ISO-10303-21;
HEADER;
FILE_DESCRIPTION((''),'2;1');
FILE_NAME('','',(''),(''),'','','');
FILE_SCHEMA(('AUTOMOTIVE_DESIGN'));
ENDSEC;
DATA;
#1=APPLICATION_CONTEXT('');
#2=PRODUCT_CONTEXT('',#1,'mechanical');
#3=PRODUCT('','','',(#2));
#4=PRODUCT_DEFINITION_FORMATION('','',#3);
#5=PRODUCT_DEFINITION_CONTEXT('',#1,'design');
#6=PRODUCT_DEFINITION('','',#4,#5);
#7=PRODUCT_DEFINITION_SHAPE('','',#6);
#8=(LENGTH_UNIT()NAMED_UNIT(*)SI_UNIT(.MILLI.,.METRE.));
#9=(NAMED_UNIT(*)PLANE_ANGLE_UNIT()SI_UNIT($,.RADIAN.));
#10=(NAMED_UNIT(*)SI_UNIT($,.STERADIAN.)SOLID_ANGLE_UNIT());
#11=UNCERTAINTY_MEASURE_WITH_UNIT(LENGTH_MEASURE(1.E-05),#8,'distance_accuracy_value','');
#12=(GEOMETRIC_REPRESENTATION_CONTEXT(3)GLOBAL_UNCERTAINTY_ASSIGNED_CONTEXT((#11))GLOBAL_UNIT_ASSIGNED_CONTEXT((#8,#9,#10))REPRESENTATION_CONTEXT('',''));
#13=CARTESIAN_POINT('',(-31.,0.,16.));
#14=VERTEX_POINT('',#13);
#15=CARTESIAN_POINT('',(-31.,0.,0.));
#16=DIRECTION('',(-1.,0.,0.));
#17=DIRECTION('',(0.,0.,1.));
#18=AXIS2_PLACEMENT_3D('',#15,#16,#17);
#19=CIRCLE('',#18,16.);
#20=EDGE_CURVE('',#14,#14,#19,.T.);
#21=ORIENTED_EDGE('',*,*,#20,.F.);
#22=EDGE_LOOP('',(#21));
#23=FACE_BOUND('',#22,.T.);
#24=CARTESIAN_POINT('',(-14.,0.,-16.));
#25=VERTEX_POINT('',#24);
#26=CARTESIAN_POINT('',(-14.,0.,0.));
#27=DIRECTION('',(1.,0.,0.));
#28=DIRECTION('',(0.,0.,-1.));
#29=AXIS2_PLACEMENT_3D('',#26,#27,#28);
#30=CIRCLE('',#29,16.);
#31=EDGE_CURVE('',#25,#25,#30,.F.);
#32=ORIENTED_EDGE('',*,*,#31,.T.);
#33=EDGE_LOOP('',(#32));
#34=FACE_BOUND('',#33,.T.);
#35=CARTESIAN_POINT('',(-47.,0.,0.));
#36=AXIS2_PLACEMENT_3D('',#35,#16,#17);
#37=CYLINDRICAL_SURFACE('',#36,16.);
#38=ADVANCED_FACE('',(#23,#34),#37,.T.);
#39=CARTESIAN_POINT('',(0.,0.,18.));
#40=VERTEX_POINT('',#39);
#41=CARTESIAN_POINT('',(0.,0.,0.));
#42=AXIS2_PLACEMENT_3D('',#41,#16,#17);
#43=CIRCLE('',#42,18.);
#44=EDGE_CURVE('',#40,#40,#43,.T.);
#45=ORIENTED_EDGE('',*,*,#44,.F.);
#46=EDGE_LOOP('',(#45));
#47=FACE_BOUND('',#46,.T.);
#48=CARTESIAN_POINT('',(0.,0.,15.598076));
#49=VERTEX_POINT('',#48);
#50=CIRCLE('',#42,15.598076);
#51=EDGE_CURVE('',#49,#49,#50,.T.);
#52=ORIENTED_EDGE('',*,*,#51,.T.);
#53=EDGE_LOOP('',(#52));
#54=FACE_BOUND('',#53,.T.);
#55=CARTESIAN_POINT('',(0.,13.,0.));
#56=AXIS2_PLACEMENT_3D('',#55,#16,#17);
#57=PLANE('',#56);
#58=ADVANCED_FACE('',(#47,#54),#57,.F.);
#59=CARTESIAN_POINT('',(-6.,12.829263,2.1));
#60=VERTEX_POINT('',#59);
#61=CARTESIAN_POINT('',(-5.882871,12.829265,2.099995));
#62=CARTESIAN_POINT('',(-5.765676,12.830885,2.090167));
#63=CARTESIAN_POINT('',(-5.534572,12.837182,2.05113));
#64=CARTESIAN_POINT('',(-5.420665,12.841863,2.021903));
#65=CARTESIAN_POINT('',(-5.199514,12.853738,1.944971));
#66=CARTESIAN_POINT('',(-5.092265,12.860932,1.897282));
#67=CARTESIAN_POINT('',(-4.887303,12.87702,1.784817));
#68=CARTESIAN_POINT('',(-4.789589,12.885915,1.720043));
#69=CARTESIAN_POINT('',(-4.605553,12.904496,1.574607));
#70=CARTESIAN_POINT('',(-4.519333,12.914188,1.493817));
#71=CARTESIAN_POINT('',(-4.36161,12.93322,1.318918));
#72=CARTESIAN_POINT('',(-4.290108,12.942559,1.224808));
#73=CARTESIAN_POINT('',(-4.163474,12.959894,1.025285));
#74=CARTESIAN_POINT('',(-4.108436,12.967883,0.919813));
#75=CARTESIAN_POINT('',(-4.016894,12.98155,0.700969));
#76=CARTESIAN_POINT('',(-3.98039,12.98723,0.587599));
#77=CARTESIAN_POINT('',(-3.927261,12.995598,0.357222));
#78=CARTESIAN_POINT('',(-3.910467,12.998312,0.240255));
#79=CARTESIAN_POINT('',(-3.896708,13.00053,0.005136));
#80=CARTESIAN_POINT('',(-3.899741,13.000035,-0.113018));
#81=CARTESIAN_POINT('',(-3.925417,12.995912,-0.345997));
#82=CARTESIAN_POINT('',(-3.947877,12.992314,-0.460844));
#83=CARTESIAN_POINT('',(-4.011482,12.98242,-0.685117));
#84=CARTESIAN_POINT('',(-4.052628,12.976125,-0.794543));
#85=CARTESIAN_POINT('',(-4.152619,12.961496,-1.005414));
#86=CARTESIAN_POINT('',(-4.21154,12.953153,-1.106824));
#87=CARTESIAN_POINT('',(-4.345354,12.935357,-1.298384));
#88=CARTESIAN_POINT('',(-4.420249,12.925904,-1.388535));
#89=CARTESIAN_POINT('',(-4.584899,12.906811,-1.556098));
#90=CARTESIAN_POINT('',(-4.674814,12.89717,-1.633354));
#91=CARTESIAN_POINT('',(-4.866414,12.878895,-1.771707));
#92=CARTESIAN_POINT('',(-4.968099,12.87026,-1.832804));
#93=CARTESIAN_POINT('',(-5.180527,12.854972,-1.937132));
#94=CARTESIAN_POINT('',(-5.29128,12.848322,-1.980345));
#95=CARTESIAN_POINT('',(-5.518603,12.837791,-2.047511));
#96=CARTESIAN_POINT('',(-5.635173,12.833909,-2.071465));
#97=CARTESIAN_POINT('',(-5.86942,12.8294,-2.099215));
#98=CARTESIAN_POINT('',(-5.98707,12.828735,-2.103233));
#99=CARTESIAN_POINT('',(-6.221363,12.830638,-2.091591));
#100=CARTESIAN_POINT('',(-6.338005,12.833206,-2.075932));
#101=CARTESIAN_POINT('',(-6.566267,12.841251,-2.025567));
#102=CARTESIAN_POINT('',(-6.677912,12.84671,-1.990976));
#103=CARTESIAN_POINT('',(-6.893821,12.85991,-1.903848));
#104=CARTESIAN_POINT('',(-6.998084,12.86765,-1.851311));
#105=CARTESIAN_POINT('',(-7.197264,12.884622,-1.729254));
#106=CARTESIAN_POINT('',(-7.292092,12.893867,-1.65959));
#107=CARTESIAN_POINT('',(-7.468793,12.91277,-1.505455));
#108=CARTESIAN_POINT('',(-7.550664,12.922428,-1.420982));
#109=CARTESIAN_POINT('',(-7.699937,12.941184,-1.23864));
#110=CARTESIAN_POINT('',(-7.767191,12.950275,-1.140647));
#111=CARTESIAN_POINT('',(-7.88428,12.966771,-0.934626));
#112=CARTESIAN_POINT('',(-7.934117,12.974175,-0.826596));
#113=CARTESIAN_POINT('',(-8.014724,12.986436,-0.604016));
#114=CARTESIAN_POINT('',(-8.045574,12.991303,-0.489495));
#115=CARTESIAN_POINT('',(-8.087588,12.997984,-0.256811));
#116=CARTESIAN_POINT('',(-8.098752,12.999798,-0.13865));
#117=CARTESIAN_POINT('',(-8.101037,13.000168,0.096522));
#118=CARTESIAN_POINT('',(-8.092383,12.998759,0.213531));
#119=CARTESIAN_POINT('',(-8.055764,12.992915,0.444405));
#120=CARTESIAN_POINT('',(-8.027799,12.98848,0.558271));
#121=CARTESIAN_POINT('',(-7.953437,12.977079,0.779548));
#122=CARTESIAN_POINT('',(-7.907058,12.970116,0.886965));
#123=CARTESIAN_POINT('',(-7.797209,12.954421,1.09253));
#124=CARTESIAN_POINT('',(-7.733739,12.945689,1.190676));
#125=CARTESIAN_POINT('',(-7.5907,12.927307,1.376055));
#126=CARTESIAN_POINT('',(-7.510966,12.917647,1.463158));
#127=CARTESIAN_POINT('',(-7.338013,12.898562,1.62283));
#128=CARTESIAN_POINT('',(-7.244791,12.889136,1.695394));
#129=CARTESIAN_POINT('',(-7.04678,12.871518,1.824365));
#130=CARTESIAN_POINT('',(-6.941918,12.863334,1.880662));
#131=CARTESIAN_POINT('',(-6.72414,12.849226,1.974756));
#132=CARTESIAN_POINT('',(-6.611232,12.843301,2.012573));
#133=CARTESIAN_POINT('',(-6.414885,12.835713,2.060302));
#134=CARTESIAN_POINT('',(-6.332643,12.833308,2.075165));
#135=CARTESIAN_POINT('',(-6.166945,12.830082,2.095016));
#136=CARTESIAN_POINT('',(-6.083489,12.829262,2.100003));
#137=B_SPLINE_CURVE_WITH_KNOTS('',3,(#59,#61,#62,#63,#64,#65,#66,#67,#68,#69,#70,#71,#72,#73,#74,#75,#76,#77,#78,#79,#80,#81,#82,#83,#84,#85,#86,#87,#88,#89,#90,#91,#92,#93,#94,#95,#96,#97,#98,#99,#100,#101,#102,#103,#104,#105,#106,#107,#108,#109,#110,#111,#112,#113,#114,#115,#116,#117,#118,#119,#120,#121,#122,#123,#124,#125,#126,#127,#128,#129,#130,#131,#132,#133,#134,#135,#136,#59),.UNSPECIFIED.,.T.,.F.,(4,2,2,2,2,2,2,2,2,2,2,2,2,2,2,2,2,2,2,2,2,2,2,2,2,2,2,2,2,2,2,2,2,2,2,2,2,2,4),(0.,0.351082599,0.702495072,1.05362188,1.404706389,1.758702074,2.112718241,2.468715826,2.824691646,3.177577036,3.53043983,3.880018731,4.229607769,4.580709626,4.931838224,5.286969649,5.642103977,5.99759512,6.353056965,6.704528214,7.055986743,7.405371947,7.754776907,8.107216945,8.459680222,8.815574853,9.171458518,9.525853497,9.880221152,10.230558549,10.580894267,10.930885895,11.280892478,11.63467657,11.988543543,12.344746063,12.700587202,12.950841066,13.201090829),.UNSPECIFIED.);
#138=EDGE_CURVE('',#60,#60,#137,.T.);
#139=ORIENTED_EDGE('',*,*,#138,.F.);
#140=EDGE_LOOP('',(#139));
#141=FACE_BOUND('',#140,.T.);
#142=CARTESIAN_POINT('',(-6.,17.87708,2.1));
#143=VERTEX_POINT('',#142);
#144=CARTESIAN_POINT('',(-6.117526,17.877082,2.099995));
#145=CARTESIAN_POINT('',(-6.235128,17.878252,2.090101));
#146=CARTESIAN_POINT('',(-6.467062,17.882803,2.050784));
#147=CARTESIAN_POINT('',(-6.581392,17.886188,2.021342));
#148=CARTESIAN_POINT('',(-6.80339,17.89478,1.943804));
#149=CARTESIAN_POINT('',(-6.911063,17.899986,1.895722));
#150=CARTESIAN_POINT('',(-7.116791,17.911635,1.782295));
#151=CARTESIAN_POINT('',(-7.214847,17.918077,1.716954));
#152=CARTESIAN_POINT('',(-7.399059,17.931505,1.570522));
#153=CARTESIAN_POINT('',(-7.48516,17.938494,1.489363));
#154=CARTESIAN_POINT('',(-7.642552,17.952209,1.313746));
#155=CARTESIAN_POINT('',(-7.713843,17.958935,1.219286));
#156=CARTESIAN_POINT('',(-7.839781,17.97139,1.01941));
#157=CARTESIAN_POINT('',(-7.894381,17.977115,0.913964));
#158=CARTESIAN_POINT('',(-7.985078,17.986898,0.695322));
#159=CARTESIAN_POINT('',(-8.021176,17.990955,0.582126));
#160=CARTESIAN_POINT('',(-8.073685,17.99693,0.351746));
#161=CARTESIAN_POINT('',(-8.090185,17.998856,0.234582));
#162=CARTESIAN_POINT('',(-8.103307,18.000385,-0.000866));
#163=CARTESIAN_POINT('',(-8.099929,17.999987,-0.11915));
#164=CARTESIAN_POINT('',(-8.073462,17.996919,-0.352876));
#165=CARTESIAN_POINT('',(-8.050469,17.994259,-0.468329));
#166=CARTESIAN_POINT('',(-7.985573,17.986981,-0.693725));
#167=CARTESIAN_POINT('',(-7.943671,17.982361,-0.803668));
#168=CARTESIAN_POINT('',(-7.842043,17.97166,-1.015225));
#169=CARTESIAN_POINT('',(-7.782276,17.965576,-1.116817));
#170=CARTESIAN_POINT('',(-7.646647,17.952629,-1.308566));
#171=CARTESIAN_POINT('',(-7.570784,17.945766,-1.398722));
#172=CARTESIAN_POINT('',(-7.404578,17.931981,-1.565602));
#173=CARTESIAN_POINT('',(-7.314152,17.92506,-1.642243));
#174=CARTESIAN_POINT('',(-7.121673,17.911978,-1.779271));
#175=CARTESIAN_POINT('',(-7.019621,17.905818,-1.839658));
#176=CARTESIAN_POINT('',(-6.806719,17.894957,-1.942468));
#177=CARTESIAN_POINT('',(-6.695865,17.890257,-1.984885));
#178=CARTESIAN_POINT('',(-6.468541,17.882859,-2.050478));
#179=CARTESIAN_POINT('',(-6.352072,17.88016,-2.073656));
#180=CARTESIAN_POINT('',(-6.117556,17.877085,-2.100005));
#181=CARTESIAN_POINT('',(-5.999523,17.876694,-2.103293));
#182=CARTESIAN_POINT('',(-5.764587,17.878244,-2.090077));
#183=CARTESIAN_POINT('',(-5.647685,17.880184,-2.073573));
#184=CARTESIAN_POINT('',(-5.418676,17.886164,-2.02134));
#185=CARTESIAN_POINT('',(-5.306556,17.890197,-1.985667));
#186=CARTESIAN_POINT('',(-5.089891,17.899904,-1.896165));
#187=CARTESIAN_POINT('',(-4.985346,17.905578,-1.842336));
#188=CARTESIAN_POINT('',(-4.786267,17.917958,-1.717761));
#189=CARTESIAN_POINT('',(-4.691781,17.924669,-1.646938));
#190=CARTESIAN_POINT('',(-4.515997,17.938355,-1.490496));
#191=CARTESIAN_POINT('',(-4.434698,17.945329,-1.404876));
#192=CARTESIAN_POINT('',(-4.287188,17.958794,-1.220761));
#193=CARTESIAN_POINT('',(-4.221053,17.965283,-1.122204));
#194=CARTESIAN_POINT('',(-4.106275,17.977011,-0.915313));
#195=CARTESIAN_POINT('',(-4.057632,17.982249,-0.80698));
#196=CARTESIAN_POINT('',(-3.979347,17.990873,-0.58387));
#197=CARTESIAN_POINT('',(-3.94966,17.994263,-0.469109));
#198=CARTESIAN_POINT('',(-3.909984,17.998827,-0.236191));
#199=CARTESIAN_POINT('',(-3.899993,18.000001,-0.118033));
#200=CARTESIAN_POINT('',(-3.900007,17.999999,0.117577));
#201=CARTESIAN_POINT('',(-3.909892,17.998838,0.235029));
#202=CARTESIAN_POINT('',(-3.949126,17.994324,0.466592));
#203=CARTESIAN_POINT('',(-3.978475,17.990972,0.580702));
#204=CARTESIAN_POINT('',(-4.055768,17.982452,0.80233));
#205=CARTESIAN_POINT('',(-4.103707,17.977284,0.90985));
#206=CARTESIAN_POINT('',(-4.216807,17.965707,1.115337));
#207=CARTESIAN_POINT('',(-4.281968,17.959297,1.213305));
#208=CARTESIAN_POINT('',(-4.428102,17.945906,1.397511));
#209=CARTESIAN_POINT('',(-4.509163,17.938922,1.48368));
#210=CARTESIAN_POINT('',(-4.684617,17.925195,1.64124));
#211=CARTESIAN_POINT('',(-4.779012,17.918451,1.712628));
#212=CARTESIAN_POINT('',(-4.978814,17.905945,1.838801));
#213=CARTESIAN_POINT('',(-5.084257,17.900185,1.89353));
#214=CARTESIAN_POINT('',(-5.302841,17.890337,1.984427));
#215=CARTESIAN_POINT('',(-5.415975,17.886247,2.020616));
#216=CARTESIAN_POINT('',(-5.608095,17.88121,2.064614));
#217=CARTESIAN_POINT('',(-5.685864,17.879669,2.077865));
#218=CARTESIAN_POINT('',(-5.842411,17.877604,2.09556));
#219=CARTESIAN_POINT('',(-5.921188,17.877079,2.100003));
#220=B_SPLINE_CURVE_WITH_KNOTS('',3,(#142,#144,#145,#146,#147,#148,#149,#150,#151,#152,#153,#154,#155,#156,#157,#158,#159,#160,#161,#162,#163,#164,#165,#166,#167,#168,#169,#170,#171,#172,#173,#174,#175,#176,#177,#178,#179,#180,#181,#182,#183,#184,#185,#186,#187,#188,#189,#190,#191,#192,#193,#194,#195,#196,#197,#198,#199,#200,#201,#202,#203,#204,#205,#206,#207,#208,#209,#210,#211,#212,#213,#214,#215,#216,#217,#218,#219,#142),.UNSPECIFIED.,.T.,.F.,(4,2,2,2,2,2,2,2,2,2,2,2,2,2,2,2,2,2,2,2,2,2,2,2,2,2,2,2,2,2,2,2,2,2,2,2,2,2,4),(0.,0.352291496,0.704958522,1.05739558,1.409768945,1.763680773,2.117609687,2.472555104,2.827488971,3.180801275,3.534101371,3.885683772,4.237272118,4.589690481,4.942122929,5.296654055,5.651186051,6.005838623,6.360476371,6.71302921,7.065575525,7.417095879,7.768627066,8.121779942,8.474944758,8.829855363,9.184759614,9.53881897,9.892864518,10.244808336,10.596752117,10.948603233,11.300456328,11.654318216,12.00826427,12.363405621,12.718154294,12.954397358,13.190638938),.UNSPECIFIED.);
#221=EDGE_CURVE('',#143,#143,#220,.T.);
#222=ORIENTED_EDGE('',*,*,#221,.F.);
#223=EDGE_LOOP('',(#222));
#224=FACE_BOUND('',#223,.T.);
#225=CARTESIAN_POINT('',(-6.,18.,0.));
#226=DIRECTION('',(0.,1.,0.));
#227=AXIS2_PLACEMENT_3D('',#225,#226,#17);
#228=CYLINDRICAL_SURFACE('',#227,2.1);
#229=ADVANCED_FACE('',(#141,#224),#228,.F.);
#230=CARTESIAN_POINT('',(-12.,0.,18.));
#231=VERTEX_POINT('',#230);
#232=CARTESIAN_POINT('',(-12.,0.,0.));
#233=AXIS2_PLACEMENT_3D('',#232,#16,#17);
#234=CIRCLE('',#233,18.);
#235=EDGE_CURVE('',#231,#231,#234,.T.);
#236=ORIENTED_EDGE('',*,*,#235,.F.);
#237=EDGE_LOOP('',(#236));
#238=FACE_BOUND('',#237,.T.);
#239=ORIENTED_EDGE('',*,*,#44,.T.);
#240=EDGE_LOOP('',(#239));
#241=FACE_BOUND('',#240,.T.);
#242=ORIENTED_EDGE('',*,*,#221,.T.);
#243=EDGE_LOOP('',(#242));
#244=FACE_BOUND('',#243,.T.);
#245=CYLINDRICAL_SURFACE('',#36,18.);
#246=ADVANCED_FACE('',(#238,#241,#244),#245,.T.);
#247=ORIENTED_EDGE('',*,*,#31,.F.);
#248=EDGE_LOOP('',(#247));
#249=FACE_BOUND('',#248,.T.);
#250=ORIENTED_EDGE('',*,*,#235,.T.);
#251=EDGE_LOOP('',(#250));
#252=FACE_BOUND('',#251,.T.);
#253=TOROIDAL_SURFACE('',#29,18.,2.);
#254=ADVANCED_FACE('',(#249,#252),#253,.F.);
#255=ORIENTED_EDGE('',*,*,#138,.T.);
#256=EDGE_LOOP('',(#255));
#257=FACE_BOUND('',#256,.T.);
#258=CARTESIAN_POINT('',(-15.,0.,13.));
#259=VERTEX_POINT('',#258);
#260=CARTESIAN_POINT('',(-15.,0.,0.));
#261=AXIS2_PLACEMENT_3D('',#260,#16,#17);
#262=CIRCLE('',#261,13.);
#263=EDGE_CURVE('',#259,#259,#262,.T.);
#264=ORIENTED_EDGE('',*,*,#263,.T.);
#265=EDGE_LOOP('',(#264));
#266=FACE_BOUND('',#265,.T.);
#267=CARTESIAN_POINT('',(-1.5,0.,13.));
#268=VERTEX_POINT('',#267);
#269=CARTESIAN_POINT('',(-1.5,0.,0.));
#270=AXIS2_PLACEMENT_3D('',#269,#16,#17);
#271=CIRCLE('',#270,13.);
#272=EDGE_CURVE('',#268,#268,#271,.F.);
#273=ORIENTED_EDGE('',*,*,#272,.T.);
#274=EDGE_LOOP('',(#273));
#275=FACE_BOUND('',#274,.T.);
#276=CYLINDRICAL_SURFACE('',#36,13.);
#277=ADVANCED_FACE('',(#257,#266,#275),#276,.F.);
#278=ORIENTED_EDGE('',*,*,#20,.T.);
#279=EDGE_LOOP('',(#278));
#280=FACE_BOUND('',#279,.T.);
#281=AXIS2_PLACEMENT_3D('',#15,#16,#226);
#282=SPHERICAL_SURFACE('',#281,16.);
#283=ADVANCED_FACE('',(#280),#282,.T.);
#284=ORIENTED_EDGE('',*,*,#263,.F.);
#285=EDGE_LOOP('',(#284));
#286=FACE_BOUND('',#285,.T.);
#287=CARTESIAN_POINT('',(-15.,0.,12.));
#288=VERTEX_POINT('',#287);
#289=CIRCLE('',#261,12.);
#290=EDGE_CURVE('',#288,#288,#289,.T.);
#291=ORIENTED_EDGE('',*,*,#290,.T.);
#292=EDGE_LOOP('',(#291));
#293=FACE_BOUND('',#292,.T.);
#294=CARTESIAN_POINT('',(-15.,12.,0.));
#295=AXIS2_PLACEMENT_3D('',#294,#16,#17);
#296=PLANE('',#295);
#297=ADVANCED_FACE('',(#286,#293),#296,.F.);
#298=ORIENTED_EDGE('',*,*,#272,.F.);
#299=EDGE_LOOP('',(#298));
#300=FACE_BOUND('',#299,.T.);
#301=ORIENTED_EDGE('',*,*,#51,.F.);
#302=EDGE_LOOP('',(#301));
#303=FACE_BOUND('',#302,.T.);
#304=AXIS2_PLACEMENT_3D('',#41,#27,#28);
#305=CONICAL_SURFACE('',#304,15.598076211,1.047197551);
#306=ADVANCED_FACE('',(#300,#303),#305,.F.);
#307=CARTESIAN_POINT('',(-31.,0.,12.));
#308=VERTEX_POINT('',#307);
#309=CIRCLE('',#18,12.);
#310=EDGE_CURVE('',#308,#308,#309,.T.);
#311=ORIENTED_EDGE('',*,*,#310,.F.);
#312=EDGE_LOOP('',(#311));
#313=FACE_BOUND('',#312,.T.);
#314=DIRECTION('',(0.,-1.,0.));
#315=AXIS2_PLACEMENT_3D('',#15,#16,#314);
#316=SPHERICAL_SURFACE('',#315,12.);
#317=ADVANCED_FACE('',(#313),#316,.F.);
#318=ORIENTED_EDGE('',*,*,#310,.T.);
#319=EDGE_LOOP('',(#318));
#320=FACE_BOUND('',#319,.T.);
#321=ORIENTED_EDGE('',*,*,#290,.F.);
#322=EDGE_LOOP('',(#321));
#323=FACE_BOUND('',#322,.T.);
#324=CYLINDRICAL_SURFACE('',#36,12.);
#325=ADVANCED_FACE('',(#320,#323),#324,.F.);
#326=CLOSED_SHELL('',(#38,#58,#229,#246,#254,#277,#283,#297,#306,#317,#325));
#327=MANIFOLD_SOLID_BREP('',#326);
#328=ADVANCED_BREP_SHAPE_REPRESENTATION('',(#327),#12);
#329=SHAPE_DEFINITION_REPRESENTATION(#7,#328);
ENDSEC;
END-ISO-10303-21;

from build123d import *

# Parameters (mm, degrees)
FILLET_1_R             = 2
CHAMFER_1_SIZE         = 1.5
CHAMFER_1_SIZE2        = 2.598076211
HOLE_WIZARD_M5_1_D     = 4.2
HOLE_WIZARD_M5_1_DEPTH = 12.4
HOLE_WIZARD_M5_1_TIP   = 1.2618073


with BuildPart() as part:
    # 草图1 → 旋转1 (revolve)
    with BuildSketch(Plane.XY, mode=Mode.PRIVATE) as revolve_1_sk:
        with BuildLine():
            Line((0, 13), (0, 18))
            Line((0, 18), (-12, 18))
            Line((-12, 18), (-12, 16))
            Line((-12, 16), (-31, 16))
            ThreePointArc((-31, 16), (-42.313708499, 11.313708499), (-47, 0))
            Line((-47, 0), (-43, 0))
            ThreePointArc((-43, 0), (-39.485281374, 8.485281374), (-31, 12))
            Line((-31, 12), (-15, 12))
            Line((-15, 12), (-15, 13))
            Line((-15, 13), (0, 13))
        make_face()
    revolve(revolve_1_sk.sketch.rotate(Axis((-47, 0, 0), (1, 0, 0)), 90), axis=Axis((-47, 0, 0), (1, 0, 0)))

    # 圆角1
    fillet_1_edges = [part.edges().sort_by_distance(p)[0] for p in [
        (-12, 0, -16),
    ]]
    fillet(fillet_1_edges, radius=FILLET_1_R - 0.0001)  # a hair under: the kernel refuses the full size

    # 倒角1
    chamfer_1_edges = [part.edges().sort_by_distance(p)[0] for p in [
        (0, 0, -13),
    ]]
    chamfer_1_side = [part.faces().sort_by_distance(p)[0] for p in [
        (-7.5, 0, -13),
    ]]
    chamfer(chamfer_1_edges, length=CHAMFER_1_SIZE, length2=CHAMFER_1_SIZE2, reference=chamfer_1_side[0])

    # M5 螺纹孔1
    with Locations(Plane(origin=(-6, 18, 0), x_dir=(0, 0, 1), z_dir=(0, 1, 0))):
        with Locations((0, 0)):
            Hole(HOLE_WIZARD_M5_1_D / 2, depth=HOLE_WIZARD_M5_1_DEPTH)
            with Locations((0, 0, -(HOLE_WIZARD_M5_1_DEPTH + HOLE_WIZARD_M5_1_TIP / 2))):  # 118° drill point
                Cone(0, HOLE_WIZARD_M5_1_D / 2, HOLE_WIZARD_M5_1_TIP, mode=Mode.SUBTRACT)


solid = part.part
